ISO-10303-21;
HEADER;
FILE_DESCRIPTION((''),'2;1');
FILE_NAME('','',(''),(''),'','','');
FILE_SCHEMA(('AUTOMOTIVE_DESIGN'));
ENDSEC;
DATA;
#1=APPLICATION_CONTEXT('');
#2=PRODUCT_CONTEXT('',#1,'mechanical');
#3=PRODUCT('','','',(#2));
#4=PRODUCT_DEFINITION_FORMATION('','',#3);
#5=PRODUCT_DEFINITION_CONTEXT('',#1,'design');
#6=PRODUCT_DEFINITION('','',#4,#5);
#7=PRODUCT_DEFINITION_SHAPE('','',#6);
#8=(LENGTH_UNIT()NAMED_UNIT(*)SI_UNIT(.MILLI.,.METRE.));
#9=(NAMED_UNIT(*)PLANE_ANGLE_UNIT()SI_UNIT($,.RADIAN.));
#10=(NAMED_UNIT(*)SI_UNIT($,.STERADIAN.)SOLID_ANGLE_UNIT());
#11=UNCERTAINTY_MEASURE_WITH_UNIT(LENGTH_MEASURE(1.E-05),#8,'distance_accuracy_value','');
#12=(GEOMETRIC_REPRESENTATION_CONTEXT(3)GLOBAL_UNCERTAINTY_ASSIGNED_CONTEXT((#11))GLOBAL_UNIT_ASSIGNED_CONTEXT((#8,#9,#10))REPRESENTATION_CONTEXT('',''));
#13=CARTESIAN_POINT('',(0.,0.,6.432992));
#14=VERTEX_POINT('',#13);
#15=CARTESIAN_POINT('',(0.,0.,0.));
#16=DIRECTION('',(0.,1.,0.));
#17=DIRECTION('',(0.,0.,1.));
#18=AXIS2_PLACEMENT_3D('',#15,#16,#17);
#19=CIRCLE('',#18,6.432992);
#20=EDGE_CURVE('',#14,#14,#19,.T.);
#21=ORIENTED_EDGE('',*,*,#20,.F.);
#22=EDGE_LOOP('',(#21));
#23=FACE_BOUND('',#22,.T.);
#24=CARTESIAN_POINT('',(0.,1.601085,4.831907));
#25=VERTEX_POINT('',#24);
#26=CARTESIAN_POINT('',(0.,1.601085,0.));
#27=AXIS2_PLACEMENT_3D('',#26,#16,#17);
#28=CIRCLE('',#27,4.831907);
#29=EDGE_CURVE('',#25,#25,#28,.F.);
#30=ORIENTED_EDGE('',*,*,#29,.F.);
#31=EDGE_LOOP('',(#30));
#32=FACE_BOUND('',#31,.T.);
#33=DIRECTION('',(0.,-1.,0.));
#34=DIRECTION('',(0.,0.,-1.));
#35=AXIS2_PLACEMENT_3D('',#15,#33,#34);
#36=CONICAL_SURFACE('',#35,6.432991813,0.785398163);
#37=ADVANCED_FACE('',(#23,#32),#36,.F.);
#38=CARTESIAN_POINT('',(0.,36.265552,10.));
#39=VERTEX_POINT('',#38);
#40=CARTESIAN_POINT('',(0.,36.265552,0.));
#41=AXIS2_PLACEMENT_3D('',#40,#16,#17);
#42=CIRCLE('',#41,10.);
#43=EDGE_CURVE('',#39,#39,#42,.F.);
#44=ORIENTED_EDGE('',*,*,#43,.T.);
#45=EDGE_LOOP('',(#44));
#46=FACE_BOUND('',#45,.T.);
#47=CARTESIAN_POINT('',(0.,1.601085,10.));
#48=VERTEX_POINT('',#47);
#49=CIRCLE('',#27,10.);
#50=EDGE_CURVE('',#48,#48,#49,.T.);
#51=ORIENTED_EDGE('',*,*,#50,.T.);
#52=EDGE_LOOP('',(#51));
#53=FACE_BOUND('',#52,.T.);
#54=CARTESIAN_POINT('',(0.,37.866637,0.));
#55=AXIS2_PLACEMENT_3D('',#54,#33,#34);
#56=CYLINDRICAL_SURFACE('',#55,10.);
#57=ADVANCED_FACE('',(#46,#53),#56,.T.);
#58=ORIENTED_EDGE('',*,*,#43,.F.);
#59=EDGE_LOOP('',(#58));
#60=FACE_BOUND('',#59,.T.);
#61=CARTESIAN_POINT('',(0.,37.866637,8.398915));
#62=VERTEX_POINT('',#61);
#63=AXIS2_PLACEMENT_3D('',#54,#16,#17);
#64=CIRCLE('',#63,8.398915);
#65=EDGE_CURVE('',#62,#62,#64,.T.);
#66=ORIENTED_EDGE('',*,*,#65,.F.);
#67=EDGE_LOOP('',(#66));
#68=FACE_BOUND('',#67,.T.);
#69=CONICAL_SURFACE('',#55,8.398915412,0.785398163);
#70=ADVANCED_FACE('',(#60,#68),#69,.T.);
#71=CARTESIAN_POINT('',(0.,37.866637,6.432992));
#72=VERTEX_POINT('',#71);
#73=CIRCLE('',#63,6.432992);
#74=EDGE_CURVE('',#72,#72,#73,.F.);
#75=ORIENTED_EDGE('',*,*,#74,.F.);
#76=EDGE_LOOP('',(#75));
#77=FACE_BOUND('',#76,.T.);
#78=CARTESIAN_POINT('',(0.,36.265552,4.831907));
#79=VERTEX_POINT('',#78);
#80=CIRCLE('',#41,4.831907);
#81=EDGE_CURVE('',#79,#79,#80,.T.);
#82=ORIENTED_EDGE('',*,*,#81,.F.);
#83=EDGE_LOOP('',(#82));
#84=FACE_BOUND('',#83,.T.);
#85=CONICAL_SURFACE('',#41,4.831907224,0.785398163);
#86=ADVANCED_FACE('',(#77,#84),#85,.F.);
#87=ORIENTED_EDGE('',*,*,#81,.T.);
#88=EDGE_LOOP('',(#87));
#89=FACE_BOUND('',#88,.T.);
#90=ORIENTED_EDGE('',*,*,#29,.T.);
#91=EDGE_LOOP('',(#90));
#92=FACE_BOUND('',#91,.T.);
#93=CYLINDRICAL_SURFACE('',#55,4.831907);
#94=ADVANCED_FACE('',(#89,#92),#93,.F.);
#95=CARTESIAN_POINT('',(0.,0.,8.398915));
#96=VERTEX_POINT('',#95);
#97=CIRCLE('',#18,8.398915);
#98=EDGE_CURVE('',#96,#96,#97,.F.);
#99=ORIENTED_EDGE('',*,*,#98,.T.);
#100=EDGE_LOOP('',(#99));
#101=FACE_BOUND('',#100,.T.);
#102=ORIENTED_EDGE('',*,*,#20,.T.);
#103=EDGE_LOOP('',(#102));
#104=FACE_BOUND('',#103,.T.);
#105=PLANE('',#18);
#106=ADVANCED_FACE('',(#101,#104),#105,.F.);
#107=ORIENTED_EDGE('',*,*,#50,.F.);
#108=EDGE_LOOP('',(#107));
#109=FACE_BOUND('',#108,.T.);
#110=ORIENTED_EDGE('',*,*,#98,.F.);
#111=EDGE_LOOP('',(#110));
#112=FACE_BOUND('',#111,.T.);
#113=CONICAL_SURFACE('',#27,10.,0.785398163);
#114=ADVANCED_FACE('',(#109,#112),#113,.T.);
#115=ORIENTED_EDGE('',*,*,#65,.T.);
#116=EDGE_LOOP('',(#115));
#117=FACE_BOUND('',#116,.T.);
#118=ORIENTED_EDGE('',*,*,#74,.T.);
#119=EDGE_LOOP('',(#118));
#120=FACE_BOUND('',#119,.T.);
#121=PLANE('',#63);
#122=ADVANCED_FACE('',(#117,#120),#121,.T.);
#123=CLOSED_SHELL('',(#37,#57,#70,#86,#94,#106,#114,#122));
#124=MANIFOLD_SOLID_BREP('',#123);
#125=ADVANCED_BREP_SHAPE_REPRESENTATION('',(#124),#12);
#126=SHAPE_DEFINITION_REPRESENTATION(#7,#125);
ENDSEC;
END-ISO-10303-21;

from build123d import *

# Parameters (mm, degrees)
SKETCH1_R           = 10
BOSS_EXTRUDE1_DEPTH = 37.866636519
SKETCH2_R           = 4.831907224
CUT_EXTRUDE1_DEPTH  = 41.421308258
CHAMFER1_SIZE       = 1.601084588


with BuildPart() as part:
    # Sketch1 → Boss-Extrude1 (new body)
    with BuildSketch(Plane(origin=(0, 0, 0), x_dir=(1, 0, 0), z_dir=(0, 1, 0))):
        Circle(SKETCH1_R)
    extrude(amount=BOSS_EXTRUDE1_DEPTH)

    # Sketch2 → Cut-Extrude1 (cut, through all)
    with BuildSketch(Plane(origin=(0, 0, 0), x_dir=(1, 0, 0), z_dir=(0, 1, 0))):
        Circle(SKETCH2_R)
    extrude(amount=CUT_EXTRUDE1_DEPTH, mode=Mode.SUBTRACT)

    # Chamfer1
    chamfer1_edges = [part.edges().sort_by_distance(p)[0] for p in [
        (-4.831907224, 37.866636519, 0),
        (-4.831907224, 0, 0),
        (-10, 0, 0),
        (-10, 37.866636519, 0),
    ]]
    chamfer(chamfer1_edges, length=CHAMFER1_SIZE)


solid = part.part
